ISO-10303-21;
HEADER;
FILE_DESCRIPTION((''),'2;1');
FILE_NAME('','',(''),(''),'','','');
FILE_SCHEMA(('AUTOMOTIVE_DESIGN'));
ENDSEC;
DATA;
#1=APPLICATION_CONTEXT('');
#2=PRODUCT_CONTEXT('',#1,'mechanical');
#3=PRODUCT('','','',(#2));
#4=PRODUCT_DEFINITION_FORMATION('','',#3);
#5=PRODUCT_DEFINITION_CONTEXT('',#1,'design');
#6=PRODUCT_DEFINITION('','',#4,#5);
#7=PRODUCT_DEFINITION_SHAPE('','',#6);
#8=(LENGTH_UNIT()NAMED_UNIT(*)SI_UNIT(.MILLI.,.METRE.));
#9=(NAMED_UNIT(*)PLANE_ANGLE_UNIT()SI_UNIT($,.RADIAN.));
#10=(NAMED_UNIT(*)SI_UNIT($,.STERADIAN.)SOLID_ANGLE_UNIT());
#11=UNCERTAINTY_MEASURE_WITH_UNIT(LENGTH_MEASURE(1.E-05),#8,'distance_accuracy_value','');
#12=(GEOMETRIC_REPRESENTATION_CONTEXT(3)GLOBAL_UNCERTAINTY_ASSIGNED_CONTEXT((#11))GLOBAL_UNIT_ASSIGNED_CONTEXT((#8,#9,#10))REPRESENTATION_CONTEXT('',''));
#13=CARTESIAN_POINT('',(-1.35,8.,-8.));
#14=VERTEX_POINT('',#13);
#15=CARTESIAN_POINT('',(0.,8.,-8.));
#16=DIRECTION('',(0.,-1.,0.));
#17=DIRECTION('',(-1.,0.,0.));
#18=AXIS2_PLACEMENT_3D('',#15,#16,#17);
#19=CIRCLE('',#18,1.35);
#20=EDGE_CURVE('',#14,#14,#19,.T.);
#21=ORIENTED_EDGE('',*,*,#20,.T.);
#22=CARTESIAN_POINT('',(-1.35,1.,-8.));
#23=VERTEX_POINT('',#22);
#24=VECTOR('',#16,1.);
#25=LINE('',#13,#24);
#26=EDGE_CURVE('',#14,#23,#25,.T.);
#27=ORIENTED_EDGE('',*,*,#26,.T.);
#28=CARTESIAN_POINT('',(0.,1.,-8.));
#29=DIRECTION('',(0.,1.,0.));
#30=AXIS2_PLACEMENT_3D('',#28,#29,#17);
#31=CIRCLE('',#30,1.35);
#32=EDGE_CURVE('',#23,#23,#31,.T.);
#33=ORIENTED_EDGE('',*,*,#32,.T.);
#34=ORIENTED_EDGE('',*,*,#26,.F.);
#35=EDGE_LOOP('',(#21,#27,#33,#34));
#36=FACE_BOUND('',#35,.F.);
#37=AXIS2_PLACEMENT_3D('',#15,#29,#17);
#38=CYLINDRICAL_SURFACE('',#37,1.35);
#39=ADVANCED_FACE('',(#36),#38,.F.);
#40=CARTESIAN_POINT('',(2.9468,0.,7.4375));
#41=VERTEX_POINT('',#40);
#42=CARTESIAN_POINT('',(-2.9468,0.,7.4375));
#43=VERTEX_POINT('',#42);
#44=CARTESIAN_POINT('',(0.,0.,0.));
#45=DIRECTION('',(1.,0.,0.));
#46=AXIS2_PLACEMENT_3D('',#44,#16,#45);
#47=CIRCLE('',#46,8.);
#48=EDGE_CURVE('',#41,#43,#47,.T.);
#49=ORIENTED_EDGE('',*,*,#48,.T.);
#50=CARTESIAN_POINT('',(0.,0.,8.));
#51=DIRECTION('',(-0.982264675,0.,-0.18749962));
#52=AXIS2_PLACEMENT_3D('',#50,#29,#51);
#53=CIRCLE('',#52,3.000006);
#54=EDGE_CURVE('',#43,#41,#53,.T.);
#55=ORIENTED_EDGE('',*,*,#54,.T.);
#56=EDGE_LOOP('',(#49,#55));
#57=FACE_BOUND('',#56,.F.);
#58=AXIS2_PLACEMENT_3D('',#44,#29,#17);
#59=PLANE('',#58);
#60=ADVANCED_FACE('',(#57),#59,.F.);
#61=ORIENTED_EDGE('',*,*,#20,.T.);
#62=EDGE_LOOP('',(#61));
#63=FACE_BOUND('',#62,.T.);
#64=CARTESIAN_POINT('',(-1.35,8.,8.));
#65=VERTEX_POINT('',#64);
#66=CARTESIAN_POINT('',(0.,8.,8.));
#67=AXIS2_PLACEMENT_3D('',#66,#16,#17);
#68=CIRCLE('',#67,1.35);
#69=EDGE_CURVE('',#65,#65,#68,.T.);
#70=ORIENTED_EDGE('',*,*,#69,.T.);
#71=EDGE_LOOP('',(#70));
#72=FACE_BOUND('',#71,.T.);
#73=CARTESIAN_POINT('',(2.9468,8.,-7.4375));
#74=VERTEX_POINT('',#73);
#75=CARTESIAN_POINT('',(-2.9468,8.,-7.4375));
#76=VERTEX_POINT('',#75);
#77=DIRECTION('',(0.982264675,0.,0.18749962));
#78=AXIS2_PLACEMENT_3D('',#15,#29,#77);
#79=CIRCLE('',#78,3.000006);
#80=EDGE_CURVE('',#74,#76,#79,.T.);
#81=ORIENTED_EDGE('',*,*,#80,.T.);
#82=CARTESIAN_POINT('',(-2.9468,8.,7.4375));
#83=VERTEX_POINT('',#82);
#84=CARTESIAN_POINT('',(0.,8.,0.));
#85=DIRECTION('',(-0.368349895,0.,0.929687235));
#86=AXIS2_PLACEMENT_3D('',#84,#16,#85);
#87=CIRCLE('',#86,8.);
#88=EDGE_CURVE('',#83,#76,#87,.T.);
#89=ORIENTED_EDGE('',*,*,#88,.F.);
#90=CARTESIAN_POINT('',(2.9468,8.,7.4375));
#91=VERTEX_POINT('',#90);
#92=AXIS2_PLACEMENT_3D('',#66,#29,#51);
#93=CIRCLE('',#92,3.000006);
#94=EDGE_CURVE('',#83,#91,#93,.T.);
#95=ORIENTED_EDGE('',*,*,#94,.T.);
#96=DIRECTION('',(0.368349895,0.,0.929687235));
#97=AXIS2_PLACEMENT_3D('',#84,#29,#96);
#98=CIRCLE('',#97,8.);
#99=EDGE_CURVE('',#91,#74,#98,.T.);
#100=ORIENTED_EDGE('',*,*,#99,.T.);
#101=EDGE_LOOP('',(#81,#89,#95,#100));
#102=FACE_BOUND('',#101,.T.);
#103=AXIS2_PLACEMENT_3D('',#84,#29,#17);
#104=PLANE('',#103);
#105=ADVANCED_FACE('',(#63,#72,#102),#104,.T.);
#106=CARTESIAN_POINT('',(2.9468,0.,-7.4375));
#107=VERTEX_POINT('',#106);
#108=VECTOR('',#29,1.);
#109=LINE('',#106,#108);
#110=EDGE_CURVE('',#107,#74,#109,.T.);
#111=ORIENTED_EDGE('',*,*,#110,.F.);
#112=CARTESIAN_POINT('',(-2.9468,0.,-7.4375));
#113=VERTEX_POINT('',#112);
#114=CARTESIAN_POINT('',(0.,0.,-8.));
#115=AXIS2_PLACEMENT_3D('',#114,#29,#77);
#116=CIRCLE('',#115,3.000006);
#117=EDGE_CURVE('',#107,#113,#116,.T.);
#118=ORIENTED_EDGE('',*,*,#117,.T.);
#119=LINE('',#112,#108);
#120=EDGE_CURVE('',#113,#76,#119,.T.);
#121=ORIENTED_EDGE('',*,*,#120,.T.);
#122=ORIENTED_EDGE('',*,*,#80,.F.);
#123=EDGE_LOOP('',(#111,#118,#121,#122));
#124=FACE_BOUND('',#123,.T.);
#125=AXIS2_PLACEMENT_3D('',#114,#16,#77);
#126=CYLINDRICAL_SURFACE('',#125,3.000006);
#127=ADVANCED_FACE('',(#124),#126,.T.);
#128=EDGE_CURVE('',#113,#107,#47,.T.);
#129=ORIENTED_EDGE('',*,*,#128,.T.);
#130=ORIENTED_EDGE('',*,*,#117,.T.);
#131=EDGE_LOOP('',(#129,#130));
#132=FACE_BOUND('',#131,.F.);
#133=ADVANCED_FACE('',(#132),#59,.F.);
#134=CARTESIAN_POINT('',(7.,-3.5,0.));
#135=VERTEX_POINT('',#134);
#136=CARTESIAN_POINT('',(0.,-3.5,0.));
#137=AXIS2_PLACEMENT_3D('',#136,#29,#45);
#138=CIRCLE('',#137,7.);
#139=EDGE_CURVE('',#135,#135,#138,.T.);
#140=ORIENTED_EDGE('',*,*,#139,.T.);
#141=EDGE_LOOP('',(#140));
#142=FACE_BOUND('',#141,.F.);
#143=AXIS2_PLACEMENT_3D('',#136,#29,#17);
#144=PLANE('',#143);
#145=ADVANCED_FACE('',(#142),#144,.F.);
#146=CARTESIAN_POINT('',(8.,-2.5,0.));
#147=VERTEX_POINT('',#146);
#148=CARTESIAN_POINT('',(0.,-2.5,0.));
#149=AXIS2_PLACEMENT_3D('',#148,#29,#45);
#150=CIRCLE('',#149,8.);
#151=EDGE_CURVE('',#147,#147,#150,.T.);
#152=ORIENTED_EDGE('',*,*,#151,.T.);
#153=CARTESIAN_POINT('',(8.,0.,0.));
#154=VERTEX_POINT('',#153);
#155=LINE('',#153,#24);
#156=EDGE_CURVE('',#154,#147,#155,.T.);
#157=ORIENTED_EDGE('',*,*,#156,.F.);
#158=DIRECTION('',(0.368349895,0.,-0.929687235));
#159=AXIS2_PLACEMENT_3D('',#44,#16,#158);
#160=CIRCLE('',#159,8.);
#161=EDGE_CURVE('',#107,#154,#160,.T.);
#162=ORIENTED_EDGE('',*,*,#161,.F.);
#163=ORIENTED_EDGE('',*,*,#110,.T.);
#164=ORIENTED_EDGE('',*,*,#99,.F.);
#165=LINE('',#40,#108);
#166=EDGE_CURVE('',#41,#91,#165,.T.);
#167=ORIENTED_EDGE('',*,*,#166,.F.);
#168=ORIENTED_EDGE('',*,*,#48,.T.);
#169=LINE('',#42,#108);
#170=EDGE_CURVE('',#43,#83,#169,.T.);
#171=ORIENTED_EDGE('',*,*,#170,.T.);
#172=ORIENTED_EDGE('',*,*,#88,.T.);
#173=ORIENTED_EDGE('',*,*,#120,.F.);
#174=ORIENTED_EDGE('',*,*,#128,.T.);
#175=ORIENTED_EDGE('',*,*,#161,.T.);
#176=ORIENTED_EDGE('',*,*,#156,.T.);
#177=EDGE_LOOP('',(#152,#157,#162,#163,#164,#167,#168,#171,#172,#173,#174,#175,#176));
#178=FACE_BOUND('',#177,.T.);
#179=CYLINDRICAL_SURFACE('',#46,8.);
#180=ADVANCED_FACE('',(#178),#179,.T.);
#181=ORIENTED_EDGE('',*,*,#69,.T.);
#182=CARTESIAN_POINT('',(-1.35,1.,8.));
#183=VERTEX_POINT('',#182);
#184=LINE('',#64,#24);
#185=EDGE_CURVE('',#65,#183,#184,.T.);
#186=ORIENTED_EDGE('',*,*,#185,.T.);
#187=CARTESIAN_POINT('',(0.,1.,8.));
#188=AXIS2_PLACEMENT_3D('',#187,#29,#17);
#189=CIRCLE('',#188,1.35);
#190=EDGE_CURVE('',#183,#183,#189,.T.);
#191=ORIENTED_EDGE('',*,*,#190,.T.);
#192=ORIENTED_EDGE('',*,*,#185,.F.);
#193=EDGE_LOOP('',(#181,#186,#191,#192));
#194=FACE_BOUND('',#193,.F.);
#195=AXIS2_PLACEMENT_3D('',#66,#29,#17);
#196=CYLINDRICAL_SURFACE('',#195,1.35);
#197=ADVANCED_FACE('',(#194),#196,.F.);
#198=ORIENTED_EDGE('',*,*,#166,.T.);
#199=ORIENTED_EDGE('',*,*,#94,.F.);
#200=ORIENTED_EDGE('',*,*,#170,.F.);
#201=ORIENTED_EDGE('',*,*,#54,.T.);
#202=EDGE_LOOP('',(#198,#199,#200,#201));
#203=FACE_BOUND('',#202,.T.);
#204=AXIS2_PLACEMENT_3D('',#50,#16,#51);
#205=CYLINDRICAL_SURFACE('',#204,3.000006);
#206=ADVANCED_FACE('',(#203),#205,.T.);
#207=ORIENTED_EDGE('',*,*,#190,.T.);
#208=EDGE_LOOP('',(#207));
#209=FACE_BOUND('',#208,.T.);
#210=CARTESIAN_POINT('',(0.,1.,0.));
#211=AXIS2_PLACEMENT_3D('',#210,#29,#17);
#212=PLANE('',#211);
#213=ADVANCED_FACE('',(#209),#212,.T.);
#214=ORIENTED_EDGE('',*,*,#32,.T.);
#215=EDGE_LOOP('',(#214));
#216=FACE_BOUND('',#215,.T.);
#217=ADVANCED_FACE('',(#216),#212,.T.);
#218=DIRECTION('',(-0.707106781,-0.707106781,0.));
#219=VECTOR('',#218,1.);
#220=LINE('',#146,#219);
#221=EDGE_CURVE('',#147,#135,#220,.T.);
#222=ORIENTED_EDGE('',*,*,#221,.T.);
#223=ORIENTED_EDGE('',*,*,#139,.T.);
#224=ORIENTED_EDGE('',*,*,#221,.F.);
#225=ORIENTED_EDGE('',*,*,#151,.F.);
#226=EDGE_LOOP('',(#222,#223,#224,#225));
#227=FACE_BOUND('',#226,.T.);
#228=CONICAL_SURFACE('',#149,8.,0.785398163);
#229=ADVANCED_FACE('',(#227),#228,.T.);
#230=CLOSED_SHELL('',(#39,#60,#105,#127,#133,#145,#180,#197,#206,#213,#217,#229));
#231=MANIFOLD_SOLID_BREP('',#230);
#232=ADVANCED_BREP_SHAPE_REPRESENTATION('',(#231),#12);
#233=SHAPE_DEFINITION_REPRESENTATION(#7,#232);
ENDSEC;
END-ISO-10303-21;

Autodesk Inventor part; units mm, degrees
ref_plane "YZ Plane" through (0, 0, 0) normal (1, 0, 0) x (0, 1, 0)
ref_plane "XZ Plane" through (0, 0, 0) normal (0, 1, 0) x (-1, 0, 0)
ref_plane "XY Plane" through (0, 0, 0) normal (0, 0, 1) x (1, 0, 0)
sketch "Sketch1" plane through (0, 0, 0) normal (0, 1, 0) x (-1, 0, 0)
  line L0 (0, 0) -> (23.6236, 0) construction
  line L1 (0, 0) -> (0, -20.0966) construction
  arc A0 (-8, 0) -> (8, 0) centre (0, 0) ccw
  arc A1 (-2.9468, -7.4375) -> (2.9468, -7.4375) centre (0, -8) ccw
  line L2 (0, -11) -> (-8.5189, -11) construction
  circle A2 centre (0, -8) radius 1.35
  line L3 (-8, 0) -> (8, 0)
  arc A3 (8, 0) -> (-8, 0) centre (0, 0) ccw
  arc A4 (2.9468, 7.4375) -> (-2.9468, 7.4375) centre (0, 8) ccw
  line L4 (0, 11) -> (-8.5189, 11) construction
  circle A5 centre (0, 8) radius 1.35
  dimension "d0" = 16
  dimension "d1" = 22
  dimension "d2" = 6
  dimension "d3" = 2.7
extrude "Extrusion1" add sketch "Sketch1" along normal blind 8
extrude "Extrusion2" cut sketch "Sketch1" against normal blind 7 from surface at 8 contours A2 A0 | A0 A2 | A5 A3 | A3 A5
extrude "Extrusion3" add sketch "Sketch1" against normal blind 3.5 contours L3 A0 A2 | A3 A5 L3 | A2 A0 | A3 A5 picked at (0, -7.5415) picked at (0, 7.5415)
chamfer "Chamfer1" distance 1 angle 45 1 edges at (2.9468, -3.5, 7.4375)
properties part number "caster_body"
